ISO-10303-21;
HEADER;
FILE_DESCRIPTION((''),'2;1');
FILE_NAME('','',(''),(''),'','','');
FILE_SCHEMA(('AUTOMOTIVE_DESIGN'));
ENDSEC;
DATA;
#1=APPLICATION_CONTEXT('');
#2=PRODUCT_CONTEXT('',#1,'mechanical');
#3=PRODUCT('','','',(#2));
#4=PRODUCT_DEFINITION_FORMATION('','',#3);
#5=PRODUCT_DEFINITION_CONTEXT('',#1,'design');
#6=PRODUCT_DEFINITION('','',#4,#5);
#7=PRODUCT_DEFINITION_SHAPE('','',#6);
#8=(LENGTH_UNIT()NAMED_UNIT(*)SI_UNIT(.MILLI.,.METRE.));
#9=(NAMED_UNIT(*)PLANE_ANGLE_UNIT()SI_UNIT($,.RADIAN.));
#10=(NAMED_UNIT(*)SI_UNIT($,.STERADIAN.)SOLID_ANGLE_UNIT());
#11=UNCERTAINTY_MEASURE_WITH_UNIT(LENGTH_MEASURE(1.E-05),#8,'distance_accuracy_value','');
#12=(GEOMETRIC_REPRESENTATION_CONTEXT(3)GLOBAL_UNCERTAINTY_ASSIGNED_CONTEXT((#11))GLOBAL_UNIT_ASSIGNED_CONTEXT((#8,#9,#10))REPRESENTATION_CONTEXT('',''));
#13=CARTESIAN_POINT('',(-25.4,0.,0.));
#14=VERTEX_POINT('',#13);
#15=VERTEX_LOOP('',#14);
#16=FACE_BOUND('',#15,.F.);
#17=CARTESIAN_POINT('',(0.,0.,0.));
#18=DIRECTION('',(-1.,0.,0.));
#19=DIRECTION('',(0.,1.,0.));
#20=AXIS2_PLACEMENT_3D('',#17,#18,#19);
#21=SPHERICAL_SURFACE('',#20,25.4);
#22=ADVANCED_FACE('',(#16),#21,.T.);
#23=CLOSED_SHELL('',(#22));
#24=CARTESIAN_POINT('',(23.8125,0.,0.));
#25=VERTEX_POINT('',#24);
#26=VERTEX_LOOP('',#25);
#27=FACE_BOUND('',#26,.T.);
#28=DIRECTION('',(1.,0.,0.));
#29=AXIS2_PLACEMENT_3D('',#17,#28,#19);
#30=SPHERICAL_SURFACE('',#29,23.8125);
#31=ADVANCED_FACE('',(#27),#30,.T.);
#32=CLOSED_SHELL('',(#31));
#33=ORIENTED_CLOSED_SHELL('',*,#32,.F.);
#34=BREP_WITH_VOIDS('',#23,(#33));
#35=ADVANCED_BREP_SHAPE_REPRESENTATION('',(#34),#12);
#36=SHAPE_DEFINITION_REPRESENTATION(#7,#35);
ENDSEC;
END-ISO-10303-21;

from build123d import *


# Not quite as in the source:
# - a feature of the source that left no trace in its solid (it failed there, or was rolled back) is left out


with BuildPart() as f2:
    # F0 (on Top) → F2 (revolve)
    with BuildSketch(Plane.XY):
        with BuildLine():
            Line((23.8125, 0), (25.4, 0))
            ThreePointArc((25.4, 0), (0, 25.4), (-25.4, 0))
            Line((-25.4, 0), (-23.8125, 0))
            ThreePointArc((-23.8125, 0), (0, 23.8125), (23.8125, 0))
        make_face()
    revolve(axis=Axis((0, 0, 0), (1, 0, 0)))


solid = f2.part
